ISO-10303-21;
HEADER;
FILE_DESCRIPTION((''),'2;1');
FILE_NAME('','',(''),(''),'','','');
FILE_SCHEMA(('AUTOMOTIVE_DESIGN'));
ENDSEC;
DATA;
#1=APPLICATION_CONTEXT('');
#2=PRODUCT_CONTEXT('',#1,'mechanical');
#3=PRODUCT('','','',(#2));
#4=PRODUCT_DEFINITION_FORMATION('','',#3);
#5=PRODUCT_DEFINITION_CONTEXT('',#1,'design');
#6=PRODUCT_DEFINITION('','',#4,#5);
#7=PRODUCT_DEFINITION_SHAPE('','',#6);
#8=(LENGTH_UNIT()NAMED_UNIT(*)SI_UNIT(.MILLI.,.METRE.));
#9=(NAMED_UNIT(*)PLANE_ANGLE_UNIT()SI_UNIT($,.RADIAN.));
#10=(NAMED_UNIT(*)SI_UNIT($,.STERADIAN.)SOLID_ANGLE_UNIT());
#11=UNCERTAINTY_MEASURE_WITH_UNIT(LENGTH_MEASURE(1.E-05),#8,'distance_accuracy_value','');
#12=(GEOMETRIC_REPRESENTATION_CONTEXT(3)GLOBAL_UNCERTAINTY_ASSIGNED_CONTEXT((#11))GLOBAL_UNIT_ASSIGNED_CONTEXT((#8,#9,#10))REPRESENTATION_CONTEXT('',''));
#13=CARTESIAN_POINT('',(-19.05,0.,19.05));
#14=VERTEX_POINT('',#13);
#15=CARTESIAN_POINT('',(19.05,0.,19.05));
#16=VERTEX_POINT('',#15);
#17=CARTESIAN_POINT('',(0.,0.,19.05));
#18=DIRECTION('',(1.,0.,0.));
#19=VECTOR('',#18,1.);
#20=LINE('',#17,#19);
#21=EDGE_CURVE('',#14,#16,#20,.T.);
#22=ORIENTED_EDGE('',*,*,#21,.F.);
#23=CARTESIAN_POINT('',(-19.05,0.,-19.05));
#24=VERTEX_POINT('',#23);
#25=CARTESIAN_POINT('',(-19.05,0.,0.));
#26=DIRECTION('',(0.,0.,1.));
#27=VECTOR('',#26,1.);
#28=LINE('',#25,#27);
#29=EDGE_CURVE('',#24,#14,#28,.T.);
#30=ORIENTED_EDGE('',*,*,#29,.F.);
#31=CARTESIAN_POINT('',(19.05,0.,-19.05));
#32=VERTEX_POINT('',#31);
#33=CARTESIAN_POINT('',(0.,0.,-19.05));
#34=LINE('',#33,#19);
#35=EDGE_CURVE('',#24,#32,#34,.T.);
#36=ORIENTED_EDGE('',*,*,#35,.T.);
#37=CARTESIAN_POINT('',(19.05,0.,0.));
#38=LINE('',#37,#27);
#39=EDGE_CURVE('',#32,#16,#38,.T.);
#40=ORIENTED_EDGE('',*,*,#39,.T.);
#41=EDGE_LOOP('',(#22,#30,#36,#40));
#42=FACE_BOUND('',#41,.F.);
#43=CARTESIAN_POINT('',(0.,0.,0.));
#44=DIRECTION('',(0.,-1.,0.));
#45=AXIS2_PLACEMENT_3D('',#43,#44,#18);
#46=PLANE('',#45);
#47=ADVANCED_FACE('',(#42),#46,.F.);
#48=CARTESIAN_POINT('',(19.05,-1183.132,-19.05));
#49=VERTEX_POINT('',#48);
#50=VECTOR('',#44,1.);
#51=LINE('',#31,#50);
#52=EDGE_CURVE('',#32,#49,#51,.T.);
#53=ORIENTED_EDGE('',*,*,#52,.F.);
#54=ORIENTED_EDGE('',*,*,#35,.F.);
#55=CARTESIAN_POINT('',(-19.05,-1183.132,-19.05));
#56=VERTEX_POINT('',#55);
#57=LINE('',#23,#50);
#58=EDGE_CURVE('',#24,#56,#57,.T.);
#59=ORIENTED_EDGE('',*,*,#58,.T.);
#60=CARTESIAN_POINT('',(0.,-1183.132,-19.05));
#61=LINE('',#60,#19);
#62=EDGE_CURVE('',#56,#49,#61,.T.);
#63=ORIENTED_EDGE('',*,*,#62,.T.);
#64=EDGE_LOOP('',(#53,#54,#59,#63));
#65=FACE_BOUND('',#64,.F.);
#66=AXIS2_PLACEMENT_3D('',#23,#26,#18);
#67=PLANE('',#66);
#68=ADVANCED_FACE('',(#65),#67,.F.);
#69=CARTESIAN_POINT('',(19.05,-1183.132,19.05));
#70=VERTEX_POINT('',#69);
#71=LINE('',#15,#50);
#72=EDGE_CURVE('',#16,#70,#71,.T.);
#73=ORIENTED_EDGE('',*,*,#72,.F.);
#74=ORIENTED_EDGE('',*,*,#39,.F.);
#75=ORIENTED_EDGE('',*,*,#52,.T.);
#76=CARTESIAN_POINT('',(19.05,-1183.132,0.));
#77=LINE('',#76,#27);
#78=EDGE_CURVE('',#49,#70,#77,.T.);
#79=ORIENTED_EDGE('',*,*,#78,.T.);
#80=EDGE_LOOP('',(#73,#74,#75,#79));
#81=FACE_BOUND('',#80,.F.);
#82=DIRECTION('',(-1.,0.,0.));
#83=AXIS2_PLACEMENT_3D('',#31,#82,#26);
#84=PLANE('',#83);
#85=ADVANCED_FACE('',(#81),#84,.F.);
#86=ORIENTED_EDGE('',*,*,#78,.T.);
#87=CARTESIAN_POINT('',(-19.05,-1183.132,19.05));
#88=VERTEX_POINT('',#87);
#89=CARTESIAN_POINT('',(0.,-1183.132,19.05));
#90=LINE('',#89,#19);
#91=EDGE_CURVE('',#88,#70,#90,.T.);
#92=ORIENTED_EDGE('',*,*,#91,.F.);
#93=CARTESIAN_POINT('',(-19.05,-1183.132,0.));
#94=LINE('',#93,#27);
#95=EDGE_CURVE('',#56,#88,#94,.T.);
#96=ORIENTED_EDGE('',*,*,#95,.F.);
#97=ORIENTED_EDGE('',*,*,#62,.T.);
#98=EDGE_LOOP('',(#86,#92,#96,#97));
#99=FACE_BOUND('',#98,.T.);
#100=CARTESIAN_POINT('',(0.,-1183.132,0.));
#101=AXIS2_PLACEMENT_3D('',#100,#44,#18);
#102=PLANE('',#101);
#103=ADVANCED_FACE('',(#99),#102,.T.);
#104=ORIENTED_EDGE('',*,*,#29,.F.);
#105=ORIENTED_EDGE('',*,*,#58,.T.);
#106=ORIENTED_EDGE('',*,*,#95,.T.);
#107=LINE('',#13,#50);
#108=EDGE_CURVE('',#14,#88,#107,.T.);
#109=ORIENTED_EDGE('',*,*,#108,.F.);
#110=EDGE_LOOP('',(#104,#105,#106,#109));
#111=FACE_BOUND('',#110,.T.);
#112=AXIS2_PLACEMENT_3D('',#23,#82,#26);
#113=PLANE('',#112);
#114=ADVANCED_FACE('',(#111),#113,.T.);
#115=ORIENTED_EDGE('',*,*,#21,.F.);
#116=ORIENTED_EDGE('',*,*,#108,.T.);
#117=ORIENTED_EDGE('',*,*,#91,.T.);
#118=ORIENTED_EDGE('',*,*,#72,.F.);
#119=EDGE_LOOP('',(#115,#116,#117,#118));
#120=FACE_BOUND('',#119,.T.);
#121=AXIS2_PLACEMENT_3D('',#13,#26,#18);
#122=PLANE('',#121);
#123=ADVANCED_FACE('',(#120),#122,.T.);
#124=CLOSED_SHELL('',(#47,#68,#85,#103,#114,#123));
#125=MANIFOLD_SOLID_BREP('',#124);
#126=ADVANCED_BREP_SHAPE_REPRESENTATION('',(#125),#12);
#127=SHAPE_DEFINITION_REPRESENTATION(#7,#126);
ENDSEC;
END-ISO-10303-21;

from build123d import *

# Parameters (mm, degrees)
F1_W     = 38.1
F1_H     = 38.1
F2_DEPTH = 1183.132


# Not quite as in the source:
# - a variable given as a bare number and used for a length is read in inches; the dataset says mm whatever the document's units were


with BuildPart() as f2:
    # F1 (on Front) → F2 (new body)
    with BuildSketch(Plane.XZ):
        Rectangle(F1_W, F1_H)
    extrude(amount=F2_DEPTH)


solid = f2.part
